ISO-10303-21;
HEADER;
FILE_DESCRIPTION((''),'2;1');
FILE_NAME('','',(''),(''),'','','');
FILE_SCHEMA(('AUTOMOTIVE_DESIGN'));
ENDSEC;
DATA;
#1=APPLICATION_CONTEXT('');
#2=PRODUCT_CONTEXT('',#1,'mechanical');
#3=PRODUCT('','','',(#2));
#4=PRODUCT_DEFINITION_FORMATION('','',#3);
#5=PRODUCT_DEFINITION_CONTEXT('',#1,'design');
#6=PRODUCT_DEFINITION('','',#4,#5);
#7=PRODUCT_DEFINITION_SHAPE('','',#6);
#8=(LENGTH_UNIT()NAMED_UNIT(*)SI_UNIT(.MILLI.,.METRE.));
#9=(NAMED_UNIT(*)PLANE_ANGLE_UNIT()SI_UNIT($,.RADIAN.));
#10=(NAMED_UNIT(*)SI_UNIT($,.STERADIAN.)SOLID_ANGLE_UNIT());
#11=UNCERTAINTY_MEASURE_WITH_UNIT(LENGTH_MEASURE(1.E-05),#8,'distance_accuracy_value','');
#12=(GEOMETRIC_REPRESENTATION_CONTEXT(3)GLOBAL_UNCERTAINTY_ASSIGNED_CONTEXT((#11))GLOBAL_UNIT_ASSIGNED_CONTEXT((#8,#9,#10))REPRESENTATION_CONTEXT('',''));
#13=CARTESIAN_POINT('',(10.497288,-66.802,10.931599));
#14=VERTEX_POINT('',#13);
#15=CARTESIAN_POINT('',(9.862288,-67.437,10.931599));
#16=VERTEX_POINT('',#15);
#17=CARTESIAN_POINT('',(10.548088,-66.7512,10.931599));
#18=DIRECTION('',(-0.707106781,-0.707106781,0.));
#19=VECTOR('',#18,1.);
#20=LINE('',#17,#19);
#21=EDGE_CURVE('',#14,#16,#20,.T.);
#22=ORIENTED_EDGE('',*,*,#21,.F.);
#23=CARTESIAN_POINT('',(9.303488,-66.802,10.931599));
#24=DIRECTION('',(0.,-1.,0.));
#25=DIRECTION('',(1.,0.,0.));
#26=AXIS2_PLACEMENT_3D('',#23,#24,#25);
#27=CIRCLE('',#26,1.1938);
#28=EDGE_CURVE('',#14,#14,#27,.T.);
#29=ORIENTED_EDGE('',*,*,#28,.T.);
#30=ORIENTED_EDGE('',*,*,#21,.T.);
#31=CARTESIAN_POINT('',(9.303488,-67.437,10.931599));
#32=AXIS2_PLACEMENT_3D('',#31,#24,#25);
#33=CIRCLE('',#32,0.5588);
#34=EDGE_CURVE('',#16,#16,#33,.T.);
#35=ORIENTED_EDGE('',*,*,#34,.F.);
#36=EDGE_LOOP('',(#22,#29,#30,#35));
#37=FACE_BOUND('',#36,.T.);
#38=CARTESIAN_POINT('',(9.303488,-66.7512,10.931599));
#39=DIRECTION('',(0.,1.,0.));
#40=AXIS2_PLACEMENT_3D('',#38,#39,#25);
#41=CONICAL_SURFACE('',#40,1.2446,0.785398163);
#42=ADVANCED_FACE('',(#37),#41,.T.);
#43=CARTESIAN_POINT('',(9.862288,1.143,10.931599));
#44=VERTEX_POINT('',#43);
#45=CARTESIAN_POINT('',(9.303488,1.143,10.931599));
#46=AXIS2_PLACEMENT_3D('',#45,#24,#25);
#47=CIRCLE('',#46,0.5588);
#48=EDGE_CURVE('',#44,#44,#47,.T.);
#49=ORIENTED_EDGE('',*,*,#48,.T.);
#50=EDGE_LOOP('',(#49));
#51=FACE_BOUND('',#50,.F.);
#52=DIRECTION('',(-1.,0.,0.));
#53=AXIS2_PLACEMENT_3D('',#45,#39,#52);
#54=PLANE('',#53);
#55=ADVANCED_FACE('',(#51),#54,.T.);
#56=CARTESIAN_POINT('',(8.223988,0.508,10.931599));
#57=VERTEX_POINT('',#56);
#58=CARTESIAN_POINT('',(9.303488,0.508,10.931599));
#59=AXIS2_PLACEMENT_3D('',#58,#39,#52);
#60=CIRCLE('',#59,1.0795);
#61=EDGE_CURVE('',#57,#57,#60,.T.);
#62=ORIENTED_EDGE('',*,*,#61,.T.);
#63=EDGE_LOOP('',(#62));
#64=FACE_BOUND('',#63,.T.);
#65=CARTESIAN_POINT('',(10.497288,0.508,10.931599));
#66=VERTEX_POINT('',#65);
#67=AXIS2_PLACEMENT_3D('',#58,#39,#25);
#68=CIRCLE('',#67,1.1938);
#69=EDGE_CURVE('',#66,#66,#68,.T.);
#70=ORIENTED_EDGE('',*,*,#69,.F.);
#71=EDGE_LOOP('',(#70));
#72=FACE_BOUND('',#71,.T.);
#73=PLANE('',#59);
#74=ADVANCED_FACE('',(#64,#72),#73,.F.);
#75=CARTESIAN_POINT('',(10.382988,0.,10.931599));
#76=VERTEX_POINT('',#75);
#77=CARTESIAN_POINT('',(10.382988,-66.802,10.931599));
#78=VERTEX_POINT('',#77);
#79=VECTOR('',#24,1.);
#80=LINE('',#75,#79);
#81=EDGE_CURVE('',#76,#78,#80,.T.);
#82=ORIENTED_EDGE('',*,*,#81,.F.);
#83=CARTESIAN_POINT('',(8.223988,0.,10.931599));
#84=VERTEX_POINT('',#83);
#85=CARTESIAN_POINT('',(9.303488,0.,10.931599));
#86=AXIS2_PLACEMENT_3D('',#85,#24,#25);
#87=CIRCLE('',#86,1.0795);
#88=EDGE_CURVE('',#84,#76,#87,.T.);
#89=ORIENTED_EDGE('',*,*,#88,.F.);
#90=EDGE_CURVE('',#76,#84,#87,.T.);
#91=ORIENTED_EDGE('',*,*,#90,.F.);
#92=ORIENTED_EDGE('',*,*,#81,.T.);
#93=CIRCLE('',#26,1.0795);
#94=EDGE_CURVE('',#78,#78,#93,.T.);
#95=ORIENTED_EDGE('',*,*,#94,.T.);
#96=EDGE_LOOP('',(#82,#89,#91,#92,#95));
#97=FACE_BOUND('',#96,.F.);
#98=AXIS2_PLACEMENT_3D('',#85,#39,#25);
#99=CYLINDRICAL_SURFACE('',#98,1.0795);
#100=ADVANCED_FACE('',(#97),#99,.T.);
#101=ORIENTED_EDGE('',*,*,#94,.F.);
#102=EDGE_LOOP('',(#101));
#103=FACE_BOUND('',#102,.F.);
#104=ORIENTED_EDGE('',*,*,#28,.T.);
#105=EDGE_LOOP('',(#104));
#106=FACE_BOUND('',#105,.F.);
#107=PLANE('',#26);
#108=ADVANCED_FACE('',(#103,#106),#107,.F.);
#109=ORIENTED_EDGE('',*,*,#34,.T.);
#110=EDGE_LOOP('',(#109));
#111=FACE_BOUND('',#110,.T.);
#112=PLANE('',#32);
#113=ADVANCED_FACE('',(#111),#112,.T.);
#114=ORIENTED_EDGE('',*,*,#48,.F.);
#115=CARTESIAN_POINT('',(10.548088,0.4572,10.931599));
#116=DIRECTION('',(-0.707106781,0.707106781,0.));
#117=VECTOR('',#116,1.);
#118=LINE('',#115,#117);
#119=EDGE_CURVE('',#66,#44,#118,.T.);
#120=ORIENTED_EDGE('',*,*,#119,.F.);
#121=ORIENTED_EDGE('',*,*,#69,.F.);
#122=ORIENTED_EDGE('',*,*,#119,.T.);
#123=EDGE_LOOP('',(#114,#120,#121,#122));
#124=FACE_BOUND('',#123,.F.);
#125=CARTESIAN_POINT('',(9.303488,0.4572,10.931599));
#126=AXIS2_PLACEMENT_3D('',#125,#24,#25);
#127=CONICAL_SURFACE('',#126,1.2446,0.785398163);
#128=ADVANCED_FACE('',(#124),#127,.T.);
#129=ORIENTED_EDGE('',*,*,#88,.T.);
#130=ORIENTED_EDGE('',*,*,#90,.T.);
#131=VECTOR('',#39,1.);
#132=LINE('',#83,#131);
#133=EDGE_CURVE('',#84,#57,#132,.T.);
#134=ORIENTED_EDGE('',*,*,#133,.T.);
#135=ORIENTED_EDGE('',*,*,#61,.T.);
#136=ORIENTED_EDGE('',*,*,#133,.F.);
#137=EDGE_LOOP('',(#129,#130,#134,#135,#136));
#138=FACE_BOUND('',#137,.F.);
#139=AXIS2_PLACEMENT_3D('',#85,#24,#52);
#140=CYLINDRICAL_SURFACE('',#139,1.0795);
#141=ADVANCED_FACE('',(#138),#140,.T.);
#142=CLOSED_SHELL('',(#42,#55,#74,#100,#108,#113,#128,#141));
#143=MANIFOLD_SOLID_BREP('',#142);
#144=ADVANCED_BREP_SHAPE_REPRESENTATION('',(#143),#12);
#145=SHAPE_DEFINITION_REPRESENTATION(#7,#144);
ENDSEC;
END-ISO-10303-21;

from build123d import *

# Parameters (mm, degrees)
F0_R     = 1.0795
F1_DEPTH = 66.802
F2_R     = 1.0795
F3_DEPTH = 0.508
F4_R     = 1.2446
F4_R_2   = 1.0795
F5_DEPTH = 0.635


# Not quite as in the source:
# - a fillet or chamfer that OpenCascade refuses, or shapes differently, is made with other operations: its cross-section is extruded or revolved along the edge and cut away or added
# - two fillets or chamfers of one size are made in one step
# - a feature of the source that left no trace in its solid (it failed there, or was rolled back) is left out
# - a pattern or mirror of a feature is missing from the dataset's text; its kind, count and spacing are read off the source's solid


with BuildPart() as f1:
    # F0 (on Front) → F1 (new body)
    with BuildSketch(Plane.XZ):
        with Locations((9.3034878373, 10.9315989539)):
            Circle(F0_R)
    extrude(amount=F1_DEPTH)

    # F2 (on face) → F3 (join)
    with BuildSketch(Plane(origin=(0, 0, 0), x_dir=(-1, 0, 0), z_dir=(0, 1, 0))):
        with Locations((-9.3034878373, 10.9315989539)):
            Circle(F2_R)
    extrude(amount=F3_DEPTH)

    # F4 (on face) → F5 (join)
    with BuildSketch(Plane.XZ.offset(66.802)):
        with Locations((9.3034878373, 10.9315989539)):
            Circle(F4_R)
        with Locations((9.3034878373, 10.9315989539)):
            Circle(F4_R_2, mode=Mode.SUBTRACT)
        with Locations((9.3034878373, 10.9315989539)):
            Circle(F4_R_2)
    f5 = extrude(amount=F5_DEPTH)

    # F5_copies: F5 across plane
    add(f5.mirror(Plane.ZX.offset(-33.147)))

    # F8: chamfer of 0.6858 on 2 edges, made by hand

    # F8_s1 → F8_t2 (revolve, cut)
    with BuildSketch(Plane.XY.offset(10.9315989539)):
        Polygon((10.5480878373, 0.4572), (9.8622878373, 1.143), (10.5480878373, 1.143), align=None)
    revolve(axis=Axis((9.3034878373, 1.143, 10.9315989539), (0, -1, 0)), mode=Mode.SUBTRACT)

    # F8_s3 → F8_t4 (revolve, cut)
    with BuildSketch(Plane.XY.offset(10.9315989539)):
        Polygon((10.5480878373, -66.7512), (9.8622878373, -67.437), (10.5480878373, -67.437), align=None)
    revolve(axis=Axis((9.3034878373, -67.437, 10.9315989539), (0, -1, 0)), mode=Mode.SUBTRACT)


solid = f1.part
